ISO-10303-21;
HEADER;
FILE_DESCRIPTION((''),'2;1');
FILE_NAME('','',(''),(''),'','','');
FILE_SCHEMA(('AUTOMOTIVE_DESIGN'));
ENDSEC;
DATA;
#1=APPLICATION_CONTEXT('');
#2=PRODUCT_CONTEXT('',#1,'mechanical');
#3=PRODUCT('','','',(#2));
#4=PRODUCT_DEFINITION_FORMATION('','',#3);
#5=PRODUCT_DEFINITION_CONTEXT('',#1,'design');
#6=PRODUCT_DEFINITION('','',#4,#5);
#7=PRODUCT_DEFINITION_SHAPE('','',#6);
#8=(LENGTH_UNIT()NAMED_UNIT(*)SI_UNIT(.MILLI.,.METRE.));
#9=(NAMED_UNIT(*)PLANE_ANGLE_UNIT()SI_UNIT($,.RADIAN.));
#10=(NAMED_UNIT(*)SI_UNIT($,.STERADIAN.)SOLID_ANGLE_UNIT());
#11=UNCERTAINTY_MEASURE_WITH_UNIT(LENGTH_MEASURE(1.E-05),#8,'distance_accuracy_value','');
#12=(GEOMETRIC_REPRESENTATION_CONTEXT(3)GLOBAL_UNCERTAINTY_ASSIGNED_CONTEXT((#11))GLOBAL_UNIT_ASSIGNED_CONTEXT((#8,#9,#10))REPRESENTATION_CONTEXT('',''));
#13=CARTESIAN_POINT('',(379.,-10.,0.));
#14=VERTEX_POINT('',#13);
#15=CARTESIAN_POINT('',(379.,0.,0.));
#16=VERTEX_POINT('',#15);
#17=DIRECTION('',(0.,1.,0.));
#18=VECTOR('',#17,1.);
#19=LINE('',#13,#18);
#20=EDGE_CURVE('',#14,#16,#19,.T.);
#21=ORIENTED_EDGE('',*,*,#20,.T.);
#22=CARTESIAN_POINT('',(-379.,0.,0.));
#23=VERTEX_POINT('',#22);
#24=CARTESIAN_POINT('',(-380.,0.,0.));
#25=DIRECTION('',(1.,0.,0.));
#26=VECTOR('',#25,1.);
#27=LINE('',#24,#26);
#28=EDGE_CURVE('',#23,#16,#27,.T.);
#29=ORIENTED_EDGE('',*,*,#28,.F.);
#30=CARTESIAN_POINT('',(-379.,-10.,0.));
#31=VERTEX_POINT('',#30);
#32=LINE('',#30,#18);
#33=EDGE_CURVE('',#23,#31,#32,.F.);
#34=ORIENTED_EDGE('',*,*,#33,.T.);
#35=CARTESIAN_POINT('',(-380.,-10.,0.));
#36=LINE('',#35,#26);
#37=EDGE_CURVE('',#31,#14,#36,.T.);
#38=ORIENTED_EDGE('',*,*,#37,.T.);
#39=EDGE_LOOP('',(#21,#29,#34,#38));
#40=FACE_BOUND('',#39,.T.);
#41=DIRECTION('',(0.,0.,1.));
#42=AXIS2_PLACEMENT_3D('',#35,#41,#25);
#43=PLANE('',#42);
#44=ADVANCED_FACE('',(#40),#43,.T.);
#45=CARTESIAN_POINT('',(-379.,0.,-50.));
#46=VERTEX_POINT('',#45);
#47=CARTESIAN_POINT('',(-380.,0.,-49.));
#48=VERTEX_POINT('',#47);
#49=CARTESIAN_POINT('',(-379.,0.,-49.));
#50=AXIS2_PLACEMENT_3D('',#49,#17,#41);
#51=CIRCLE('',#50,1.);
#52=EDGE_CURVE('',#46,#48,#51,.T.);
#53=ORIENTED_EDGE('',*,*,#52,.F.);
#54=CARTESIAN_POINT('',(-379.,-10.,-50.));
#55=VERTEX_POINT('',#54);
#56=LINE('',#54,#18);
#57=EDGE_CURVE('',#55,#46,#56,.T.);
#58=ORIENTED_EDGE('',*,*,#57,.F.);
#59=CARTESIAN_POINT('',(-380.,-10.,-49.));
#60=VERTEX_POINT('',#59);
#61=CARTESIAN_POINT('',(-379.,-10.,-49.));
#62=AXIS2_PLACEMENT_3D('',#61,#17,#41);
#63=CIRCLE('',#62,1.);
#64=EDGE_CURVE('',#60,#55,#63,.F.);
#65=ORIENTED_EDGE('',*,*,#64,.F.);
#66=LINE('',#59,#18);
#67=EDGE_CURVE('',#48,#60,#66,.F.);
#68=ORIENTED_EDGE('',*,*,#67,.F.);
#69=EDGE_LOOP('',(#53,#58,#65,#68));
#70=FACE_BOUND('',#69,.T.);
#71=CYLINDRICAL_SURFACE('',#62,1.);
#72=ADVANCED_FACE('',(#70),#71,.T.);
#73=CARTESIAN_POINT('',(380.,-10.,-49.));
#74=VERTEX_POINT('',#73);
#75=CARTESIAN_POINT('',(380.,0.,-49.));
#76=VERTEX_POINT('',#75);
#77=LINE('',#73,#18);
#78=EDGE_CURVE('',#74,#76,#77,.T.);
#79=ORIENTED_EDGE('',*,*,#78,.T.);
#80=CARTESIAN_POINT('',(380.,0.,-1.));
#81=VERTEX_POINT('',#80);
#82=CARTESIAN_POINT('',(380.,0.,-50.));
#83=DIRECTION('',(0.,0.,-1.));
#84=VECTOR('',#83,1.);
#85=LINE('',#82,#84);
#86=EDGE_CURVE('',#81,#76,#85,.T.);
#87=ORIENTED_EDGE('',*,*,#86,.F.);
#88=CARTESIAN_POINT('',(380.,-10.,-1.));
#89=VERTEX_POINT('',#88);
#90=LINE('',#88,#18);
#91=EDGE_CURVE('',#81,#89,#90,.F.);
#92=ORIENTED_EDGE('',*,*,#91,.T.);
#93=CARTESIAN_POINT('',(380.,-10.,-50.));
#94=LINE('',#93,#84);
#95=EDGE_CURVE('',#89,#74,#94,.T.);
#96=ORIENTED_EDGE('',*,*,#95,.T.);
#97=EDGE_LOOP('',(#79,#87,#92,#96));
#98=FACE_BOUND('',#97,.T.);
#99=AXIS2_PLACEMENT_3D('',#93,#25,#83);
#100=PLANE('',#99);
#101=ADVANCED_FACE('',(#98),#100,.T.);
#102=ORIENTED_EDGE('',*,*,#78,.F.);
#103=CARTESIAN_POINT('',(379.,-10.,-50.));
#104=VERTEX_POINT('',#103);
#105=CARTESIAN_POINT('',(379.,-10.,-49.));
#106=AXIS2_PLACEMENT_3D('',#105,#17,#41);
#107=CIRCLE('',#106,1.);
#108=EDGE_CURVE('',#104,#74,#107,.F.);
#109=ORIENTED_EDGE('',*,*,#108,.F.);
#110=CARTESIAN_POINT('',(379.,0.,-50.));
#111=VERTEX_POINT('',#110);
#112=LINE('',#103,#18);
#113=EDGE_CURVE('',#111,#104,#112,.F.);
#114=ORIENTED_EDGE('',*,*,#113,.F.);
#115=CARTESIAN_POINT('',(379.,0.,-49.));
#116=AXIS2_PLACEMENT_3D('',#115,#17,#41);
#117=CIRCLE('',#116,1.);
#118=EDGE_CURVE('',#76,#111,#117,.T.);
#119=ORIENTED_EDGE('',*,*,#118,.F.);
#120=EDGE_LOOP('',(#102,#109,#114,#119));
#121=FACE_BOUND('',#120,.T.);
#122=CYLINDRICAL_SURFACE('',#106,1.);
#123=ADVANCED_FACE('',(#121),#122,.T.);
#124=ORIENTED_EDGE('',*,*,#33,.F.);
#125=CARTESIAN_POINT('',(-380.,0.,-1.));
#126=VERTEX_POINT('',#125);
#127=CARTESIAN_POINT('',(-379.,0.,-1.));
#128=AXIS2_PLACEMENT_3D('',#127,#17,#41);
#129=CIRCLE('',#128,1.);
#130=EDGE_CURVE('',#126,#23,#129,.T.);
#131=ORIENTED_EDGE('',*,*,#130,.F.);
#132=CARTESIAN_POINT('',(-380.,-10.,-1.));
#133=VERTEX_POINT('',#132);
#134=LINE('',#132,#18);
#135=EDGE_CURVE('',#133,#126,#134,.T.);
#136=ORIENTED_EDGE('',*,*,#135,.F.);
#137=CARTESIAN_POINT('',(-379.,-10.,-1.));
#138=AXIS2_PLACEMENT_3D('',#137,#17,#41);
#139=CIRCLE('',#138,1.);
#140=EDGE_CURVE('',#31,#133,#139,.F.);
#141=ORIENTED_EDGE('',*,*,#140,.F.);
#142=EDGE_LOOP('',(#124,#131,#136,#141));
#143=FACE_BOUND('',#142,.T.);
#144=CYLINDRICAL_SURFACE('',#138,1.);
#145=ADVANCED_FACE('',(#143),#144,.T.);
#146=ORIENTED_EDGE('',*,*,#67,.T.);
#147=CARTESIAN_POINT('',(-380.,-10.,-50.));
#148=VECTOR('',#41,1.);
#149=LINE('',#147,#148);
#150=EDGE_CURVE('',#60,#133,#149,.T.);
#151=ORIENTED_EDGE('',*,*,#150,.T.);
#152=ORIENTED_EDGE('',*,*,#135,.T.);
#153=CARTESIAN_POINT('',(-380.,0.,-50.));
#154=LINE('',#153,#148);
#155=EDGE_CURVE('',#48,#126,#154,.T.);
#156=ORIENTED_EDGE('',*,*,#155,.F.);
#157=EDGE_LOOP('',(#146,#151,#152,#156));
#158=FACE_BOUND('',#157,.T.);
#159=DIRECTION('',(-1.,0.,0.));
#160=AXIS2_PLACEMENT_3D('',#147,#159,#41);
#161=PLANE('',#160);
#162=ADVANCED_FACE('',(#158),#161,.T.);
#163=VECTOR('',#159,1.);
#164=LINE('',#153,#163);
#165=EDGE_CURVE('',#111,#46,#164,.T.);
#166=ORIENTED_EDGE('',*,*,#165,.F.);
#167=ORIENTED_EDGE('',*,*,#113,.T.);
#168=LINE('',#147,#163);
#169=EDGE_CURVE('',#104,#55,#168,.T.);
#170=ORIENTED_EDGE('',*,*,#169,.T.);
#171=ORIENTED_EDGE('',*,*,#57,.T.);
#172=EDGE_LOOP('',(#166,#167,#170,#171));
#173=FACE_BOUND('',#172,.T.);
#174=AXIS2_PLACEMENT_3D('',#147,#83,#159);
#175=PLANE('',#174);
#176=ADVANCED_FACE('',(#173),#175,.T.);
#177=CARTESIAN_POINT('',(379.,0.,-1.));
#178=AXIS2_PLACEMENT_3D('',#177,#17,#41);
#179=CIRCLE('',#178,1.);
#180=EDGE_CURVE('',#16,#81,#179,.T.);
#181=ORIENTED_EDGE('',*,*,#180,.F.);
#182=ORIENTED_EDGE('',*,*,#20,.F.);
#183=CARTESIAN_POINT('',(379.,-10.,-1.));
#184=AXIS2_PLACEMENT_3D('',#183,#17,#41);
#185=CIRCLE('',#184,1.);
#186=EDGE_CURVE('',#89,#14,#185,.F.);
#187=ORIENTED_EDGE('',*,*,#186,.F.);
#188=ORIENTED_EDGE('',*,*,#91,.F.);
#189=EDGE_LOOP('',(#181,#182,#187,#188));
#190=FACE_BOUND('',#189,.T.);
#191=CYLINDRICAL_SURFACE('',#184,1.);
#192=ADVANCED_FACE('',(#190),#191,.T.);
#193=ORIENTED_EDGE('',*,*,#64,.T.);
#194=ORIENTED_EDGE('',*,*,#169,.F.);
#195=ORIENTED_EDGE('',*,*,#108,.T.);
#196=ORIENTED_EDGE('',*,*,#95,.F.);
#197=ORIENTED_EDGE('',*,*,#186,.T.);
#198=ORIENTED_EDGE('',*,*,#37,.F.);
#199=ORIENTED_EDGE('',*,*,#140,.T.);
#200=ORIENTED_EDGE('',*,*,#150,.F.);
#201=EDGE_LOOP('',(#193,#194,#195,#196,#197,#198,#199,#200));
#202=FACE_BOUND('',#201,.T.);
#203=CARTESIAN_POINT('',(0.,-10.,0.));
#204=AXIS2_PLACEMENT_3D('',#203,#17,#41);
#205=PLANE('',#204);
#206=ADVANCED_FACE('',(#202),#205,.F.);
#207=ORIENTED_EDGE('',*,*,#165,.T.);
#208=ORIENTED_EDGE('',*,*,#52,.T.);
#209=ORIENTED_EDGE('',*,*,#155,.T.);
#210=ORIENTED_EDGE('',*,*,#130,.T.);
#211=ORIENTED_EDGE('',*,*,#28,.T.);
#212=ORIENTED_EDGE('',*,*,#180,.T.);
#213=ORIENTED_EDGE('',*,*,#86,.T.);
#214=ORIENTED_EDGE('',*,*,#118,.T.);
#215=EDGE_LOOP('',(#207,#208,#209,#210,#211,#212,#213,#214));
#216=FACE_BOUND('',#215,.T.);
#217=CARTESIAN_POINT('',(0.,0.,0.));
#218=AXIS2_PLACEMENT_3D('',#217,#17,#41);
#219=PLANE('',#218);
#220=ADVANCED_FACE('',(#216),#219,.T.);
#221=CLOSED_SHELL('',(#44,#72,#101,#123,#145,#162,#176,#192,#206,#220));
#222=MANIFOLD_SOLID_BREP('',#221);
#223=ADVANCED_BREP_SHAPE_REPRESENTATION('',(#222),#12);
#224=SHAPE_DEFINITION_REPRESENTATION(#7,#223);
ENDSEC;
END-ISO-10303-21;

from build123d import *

# Parameters (mm, degrees)
SKETCH1_W          = 760
SKETCH1_H          = 50
BASE_FLANGE1_DEPTH = 10
FILLET_1_0_R       = 1


# Sheet-metal steps are written as plain solids
with BuildPart() as part:
    # Sketch1 → Base-Flange1 (new body)
    with BuildSketch(Plane(origin=(0, 0, 0), x_dir=(1, 0, 0), z_dir=(0, 1, 0))):
        with Locations((0, 25)):
            Rectangle(SKETCH1_W, SKETCH1_H)
    extrude(amount=-BASE_FLANGE1_DEPTH)

    # Fillet-1.0
    fillet_1_0_edges = [part.edges().sort_by_distance(p)[0] for p in [
        (-380, -5, -50),
        (380, -5, -50),
        (380, -5, 0),
        (-380, -5, 0),
    ]]
    fillet(fillet_1_0_edges, radius=FILLET_1_0_R)


solid = part.part
